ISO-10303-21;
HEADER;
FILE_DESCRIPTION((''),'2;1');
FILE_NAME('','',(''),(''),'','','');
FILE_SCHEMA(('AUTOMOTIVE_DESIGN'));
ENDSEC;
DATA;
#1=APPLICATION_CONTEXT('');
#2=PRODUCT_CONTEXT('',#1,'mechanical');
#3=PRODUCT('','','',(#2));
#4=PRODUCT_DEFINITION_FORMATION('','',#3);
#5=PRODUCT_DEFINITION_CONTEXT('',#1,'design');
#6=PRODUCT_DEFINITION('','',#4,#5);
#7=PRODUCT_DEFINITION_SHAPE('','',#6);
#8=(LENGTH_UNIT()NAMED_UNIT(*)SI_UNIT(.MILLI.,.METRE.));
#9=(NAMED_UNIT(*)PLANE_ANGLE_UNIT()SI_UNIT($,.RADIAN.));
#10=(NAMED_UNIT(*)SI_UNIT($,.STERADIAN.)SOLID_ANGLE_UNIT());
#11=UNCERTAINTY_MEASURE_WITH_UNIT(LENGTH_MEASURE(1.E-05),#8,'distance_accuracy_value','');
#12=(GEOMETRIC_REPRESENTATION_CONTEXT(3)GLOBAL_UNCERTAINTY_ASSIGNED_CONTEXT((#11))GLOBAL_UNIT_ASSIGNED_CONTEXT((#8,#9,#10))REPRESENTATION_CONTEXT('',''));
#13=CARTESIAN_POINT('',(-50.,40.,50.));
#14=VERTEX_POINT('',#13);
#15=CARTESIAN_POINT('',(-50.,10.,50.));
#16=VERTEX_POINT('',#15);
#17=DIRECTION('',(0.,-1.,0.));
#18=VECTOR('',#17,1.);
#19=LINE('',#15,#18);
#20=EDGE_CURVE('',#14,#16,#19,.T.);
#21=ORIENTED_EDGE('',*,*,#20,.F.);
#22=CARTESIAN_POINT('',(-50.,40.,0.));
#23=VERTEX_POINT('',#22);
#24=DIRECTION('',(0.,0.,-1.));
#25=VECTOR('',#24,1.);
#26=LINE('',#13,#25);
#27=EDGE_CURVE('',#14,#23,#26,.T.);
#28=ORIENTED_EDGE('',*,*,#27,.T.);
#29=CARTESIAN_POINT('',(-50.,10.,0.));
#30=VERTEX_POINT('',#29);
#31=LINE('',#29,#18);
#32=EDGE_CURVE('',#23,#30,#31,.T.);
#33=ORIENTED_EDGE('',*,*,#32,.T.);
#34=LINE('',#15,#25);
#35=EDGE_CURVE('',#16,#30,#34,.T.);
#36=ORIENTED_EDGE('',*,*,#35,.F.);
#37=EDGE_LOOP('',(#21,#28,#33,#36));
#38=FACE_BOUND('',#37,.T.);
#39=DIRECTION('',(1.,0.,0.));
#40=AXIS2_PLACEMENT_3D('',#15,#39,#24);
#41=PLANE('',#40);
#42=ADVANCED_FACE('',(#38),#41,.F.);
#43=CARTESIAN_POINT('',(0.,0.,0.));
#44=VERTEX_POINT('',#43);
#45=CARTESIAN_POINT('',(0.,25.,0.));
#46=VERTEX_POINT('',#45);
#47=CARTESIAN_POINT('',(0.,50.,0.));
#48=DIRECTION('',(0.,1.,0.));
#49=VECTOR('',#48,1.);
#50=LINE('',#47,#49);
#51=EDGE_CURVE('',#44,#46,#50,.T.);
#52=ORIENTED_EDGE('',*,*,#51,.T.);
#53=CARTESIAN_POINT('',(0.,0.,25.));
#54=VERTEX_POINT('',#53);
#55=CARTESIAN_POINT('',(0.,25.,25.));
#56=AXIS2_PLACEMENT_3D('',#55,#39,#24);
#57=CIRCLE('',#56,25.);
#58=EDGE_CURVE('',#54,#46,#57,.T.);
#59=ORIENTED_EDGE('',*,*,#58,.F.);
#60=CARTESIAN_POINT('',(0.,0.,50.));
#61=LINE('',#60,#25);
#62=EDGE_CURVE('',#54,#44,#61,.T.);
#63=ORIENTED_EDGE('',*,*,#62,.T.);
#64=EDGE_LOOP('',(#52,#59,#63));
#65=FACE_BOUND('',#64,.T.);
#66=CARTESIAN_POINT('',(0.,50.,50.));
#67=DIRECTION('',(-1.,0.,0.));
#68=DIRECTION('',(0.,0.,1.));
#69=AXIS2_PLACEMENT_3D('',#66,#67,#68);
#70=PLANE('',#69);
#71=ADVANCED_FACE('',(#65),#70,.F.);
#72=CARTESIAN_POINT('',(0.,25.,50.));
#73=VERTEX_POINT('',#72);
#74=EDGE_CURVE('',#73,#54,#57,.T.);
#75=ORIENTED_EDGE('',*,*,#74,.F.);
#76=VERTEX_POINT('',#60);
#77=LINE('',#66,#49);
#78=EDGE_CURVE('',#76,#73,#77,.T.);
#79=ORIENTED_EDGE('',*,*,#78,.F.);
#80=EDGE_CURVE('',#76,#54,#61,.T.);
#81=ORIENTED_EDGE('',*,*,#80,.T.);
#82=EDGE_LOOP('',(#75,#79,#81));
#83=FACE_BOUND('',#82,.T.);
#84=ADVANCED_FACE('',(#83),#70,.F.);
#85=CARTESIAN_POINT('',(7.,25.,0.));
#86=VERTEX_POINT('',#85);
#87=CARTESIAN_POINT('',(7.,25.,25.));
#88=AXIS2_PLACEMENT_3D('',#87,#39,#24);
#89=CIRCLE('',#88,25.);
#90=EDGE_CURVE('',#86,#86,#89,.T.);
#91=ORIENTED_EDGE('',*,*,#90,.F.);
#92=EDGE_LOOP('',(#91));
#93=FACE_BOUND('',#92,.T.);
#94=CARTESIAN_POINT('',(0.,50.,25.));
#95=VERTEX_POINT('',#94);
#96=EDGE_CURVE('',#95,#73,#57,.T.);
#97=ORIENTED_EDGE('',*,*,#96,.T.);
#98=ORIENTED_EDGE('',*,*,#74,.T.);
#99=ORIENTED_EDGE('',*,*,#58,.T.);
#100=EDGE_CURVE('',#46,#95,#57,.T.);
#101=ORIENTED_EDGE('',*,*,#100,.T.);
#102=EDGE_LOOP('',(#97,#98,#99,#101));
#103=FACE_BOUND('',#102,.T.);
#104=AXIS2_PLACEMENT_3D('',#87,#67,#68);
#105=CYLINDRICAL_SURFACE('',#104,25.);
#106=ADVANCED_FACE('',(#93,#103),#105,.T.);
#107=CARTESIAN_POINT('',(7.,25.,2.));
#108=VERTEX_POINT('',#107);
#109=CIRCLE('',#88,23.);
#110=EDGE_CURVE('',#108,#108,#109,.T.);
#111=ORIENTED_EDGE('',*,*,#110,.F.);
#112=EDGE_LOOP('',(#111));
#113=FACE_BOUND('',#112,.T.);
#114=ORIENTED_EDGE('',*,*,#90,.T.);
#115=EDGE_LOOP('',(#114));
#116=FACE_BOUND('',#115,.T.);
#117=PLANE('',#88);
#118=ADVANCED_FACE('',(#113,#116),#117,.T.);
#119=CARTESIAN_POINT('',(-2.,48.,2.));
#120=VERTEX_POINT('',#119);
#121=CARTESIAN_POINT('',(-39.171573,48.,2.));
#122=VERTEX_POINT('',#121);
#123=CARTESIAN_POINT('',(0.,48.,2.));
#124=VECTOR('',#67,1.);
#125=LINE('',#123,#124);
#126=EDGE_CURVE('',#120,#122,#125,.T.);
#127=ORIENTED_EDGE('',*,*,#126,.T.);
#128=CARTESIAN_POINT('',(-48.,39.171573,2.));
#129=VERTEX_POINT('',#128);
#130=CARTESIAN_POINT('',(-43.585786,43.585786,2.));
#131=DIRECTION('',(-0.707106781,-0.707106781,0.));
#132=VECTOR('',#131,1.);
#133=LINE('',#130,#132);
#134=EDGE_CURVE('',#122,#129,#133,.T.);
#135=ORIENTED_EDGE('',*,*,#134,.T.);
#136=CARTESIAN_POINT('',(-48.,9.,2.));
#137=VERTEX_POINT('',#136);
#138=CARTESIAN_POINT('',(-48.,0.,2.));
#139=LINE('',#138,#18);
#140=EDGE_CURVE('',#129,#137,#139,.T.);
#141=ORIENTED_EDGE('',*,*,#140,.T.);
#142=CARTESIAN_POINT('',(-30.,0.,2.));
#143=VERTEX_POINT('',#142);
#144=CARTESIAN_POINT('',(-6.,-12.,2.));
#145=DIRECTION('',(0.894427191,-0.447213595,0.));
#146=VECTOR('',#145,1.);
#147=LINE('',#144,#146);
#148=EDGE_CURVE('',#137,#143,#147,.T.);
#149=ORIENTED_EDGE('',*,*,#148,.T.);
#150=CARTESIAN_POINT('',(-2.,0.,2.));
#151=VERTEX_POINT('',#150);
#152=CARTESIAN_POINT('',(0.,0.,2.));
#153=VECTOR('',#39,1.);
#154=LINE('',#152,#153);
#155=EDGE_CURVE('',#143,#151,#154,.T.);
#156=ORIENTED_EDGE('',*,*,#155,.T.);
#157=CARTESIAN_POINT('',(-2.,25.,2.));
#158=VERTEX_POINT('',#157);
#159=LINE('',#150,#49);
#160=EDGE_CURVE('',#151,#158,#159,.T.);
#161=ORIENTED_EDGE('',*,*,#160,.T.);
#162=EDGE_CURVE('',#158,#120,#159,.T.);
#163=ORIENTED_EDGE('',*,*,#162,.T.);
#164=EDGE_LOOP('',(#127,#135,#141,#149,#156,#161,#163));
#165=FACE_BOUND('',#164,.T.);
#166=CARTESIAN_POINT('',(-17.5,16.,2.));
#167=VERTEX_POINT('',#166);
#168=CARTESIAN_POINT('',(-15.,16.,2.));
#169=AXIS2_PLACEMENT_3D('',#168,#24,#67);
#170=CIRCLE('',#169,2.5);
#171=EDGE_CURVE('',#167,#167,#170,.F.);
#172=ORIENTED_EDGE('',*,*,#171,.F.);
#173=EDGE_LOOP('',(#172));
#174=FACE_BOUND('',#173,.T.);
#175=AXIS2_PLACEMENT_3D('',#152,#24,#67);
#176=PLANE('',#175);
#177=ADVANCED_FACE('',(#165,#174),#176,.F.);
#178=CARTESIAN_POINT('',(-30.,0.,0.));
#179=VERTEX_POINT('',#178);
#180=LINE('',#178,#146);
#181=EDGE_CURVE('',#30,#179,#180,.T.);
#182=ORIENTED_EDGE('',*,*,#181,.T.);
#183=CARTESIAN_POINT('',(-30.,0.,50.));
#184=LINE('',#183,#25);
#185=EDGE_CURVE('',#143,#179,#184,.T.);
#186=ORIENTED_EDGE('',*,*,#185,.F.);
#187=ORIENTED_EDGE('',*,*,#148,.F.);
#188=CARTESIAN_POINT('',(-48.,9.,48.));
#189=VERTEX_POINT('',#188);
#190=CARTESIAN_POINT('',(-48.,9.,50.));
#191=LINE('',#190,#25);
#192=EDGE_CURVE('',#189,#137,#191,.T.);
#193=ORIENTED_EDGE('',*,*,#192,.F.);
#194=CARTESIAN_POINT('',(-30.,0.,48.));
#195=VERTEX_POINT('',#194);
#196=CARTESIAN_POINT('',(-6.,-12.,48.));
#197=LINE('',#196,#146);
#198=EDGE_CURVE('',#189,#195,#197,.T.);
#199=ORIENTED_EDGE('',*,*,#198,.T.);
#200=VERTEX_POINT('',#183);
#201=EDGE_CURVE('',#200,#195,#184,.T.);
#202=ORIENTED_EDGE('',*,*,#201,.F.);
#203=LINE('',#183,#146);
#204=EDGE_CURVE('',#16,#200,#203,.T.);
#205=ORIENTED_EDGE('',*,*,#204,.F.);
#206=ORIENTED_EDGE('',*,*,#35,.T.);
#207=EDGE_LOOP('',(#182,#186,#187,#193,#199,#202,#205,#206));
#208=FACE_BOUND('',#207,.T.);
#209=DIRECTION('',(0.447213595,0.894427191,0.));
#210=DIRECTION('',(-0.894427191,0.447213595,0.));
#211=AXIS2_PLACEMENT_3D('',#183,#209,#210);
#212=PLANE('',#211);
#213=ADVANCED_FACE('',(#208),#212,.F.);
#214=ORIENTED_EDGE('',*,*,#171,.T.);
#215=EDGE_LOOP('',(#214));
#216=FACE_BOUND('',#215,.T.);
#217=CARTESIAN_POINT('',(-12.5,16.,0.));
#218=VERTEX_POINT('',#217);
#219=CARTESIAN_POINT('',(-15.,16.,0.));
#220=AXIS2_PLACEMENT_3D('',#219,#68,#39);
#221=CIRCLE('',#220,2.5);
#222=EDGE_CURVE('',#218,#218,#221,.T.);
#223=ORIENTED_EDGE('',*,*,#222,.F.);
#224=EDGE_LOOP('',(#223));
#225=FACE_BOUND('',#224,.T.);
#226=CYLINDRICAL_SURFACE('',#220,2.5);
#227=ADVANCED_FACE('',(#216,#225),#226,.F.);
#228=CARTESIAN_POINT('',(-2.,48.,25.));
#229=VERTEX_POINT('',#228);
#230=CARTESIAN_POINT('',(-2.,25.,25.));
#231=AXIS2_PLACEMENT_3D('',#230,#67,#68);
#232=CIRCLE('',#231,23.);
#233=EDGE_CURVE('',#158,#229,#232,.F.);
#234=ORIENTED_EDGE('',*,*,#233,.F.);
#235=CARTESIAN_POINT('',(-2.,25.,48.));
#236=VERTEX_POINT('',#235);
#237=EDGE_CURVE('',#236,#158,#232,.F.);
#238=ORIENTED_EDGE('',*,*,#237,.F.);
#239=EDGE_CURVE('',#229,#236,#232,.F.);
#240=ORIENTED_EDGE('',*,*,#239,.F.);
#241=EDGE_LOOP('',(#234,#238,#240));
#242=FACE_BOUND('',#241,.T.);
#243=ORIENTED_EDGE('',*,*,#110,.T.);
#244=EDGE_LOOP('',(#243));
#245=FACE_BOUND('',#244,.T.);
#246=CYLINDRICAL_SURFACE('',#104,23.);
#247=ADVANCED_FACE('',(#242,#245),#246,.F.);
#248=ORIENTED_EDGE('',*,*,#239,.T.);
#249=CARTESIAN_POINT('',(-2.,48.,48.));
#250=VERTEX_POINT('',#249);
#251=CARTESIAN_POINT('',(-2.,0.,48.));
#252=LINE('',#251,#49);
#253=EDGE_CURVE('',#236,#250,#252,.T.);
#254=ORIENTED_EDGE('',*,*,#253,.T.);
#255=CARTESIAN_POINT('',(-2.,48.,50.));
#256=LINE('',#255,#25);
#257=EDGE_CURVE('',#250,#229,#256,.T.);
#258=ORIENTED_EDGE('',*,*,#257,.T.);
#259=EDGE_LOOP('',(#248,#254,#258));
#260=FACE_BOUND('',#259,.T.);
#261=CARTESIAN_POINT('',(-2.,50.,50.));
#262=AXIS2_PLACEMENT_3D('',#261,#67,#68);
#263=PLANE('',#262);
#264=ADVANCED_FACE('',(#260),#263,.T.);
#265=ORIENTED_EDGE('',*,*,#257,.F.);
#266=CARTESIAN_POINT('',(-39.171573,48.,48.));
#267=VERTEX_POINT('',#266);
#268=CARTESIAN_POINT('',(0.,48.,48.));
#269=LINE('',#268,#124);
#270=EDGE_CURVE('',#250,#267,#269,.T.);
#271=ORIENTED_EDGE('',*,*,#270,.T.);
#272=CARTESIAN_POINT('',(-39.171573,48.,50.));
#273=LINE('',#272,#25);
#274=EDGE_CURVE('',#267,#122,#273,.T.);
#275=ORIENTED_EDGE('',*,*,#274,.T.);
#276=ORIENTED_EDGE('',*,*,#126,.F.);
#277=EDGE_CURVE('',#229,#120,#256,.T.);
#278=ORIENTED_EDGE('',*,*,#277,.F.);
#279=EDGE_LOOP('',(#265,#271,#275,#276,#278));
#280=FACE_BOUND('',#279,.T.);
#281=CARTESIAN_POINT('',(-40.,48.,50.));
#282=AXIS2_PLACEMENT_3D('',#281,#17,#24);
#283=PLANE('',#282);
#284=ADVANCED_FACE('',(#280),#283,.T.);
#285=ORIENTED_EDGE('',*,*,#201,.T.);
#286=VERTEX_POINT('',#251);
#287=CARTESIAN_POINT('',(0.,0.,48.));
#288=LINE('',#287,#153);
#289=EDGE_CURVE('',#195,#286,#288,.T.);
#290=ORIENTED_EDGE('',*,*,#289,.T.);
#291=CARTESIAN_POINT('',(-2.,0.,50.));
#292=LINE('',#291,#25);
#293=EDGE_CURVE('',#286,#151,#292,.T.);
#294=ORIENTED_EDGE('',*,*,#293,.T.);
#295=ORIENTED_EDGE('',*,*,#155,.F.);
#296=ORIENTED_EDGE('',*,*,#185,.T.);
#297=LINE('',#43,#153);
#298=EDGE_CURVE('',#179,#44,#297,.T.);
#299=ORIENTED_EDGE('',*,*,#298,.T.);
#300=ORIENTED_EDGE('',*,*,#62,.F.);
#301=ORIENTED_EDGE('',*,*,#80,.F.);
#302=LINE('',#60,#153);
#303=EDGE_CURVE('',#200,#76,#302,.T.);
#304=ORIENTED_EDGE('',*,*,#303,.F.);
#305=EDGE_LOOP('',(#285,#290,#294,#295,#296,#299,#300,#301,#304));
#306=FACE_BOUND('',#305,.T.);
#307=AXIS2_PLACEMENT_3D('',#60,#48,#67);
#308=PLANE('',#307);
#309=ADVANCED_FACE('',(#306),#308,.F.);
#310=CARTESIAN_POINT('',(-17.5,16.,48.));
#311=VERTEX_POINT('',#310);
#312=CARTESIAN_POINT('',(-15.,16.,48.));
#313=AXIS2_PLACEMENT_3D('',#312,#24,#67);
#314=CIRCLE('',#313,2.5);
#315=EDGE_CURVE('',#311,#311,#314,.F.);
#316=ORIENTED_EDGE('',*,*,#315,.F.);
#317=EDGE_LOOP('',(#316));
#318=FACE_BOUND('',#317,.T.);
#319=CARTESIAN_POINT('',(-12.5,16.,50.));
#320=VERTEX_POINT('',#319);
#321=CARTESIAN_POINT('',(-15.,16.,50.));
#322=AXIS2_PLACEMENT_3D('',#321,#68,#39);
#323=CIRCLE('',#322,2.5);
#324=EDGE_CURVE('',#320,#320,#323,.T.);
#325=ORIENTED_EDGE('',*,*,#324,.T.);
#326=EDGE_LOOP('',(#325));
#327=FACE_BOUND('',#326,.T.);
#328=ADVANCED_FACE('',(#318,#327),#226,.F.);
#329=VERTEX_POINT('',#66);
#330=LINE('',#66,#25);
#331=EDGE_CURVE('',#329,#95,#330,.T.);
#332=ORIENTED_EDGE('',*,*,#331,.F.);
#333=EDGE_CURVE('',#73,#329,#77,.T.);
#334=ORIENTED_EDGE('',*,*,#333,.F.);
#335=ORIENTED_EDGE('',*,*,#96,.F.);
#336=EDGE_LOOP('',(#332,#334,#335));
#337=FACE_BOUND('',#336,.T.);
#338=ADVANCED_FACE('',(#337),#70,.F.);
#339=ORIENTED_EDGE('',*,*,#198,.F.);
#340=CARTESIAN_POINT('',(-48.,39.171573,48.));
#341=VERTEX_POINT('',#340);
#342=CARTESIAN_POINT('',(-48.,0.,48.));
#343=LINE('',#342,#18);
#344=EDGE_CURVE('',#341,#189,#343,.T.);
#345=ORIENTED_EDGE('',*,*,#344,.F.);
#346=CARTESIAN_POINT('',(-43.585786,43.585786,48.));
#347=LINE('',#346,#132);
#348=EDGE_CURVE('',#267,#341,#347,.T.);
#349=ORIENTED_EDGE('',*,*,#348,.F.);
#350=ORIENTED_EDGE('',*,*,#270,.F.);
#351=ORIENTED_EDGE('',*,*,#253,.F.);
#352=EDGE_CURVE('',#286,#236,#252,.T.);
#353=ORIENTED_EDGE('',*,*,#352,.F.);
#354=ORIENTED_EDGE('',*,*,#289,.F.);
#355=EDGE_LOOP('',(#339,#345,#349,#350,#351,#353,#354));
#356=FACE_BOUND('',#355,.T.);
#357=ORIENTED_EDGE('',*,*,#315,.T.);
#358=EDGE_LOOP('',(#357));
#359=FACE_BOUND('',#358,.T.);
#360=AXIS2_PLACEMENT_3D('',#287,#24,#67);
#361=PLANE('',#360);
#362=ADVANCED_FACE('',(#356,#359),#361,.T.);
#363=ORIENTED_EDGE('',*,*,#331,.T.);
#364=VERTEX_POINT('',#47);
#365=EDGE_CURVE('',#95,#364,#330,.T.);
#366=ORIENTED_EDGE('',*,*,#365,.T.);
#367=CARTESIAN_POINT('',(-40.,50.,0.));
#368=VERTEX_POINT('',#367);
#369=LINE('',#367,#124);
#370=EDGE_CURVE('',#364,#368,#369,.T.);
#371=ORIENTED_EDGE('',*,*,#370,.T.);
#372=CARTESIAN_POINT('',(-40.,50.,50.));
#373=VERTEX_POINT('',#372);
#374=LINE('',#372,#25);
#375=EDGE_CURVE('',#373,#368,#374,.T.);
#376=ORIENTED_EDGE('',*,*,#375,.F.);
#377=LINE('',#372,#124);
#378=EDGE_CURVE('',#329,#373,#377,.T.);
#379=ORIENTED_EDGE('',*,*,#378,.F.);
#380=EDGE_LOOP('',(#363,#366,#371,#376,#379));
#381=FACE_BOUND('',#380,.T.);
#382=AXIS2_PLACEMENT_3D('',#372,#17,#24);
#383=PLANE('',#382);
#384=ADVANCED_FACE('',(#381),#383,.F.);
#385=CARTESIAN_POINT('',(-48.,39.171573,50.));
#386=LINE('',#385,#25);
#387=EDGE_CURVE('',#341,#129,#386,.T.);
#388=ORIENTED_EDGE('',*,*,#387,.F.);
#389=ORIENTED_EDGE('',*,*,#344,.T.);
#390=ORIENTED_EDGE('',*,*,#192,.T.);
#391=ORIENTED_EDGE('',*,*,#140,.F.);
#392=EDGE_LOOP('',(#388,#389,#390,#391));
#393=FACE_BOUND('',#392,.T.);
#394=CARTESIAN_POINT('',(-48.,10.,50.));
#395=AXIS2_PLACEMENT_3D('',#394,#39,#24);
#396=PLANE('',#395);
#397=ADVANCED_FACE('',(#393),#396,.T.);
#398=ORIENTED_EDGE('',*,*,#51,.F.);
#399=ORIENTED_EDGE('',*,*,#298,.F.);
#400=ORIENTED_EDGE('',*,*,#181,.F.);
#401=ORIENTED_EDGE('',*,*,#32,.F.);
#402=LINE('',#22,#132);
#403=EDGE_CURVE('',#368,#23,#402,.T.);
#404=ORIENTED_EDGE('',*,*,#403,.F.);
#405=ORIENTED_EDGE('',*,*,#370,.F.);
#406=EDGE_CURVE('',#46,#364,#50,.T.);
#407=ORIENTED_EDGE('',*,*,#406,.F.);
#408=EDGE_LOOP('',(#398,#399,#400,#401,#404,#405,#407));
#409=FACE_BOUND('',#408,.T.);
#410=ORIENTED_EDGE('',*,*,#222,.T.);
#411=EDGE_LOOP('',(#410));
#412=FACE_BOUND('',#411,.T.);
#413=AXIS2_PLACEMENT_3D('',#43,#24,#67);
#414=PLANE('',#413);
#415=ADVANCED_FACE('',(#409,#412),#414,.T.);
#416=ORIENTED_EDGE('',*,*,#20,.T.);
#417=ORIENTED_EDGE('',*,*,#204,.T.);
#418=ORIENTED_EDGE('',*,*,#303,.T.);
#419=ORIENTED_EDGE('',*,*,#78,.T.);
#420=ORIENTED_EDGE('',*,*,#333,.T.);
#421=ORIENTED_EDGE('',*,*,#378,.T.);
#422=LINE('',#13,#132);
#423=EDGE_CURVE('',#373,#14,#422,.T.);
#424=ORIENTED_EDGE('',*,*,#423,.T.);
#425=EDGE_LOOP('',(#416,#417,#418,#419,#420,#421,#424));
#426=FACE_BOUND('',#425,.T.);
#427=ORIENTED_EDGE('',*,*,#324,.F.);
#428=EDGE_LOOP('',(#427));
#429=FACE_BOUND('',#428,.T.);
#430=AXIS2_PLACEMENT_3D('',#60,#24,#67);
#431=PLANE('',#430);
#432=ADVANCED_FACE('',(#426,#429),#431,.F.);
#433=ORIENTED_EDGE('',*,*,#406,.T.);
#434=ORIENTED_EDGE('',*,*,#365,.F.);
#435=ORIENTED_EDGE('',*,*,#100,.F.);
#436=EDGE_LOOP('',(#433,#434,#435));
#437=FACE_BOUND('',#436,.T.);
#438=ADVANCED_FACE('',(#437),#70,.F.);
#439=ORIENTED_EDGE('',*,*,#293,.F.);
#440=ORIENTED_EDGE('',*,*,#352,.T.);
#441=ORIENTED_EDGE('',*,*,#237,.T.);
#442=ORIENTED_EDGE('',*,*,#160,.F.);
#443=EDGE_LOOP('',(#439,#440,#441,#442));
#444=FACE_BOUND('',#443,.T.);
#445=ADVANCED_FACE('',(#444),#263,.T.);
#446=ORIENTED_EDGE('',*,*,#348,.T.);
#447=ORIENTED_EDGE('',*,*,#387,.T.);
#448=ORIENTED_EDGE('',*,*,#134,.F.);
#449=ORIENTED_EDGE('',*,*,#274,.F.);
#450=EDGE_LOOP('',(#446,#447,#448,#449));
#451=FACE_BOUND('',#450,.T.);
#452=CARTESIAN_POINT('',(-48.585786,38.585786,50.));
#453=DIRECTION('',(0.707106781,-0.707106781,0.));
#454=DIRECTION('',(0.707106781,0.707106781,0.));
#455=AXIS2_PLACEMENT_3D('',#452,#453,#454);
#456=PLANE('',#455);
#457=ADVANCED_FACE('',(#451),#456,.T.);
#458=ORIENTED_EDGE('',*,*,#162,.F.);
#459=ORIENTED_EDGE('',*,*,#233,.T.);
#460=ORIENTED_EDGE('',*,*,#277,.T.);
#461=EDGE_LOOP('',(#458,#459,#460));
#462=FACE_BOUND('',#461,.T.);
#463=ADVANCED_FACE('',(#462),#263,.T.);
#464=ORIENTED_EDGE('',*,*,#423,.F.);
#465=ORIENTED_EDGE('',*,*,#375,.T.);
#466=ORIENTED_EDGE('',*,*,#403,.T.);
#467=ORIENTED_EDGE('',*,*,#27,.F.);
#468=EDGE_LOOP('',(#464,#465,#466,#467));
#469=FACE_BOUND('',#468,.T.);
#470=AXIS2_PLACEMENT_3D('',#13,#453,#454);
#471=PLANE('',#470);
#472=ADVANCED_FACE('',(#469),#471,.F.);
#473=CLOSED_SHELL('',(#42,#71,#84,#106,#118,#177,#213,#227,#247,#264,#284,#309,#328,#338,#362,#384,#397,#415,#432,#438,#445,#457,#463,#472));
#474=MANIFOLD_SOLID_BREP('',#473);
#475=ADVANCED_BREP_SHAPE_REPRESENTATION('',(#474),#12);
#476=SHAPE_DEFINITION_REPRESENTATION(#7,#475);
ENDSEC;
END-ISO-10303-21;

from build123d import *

# Parameters (mm, degrees)
BOSS_EXTRU_1_DEPTH      = 50
ESQUISSE3_R             = 25
BOSS_EXTRU_2_DEPTH      = 7
ESQUISSE4_R             = 2.5
ENL_V_MAT_EXTRU_1_DEPTH = 87.602540378
COQUE1_START            = -39.171572875
COQUE1_OUTLINE_W        = 48
COQUE1_OUTLINE_H        = 46
COQUE1_DEPTH            = 37.171572875
COQUE1_START_2          = -2
COQUE1_2_OUTLINE_R      = 23
COQUE1_2_DEPTH          = 9
COQUE1_START_3          = -48
COQUE1_3_DEPTH          = 15.9452
COQUE1_START_4          = 2
COQUE1_4_DEPTH          = 46


with BuildPart() as part:
    # Esquisse1 → Boss.-Extru.1 (new body)
    with BuildSketch(Plane.XY):
        Polygon((0, 0), (-30, 0), (-50, 10), (-50, 40), (-40, 50), (0, 50), align=None)
    extrude(amount=BOSS_EXTRU_1_DEPTH)

    # Esquisse3 → Boss.-Extru.2 (add)
    with BuildSketch(Plane(origin=(0, 0, 0), x_dir=(0, 0, -1), z_dir=(1, 0, 0))):
        with Locations((-25, 25)):
            Circle(ESQUISSE3_R)
    extrude(amount=BOSS_EXTRU_2_DEPTH)

    # Esquisse4 → Enlèv. mat.-Extru.1 (cut, through all)
    with BuildSketch(Plane.XY.offset(50)):
        with Locations((-15, 16)):
            Circle(ESQUISSE4_R)
    extrude(amount=-ENL_V_MAT_EXTRU_1_DEPTH, mode=Mode.SUBTRACT)

    # Coque1: read off the stored shape, not the designer's step
    # Coque1 outline → Coque1 (cut)
    with BuildSketch(Plane.YZ.offset(COQUE1_START)):
        with Locations((24, 25)):
            Rectangle(COQUE1_OUTLINE_W, COQUE1_OUTLINE_H)
    extrude(amount=COQUE1_DEPTH, mode=Mode.SUBTRACT)

    # Coque1 2 outline → Coque1 2 (cut)
    with BuildSketch(Plane.YZ.offset(COQUE1_START_2)):
        with Locations((25, 25)):
            Circle(COQUE1_2_OUTLINE_R)
    extrude(amount=COQUE1_2_DEPTH, mode=Mode.SUBTRACT)

    # Coque1 3 outline → Coque1 3 (cut)
    with BuildSketch(Plane.YZ.offset(COQUE1_START_3)):
        with BuildLine():
            ThreePointArc((25, 2), (2, 25), (25, 48))
            Line((25, 48), (0, 48))
            Line((0, 48), (0, 2))
            Line((0, 2), (25, 2))
        make_face()
    extrude(amount=COQUE1_3_DEPTH, mode=Mode.SUBTRACT)

    # Coque1 4 outline → Coque1 4 (cut)
    with BuildSketch(Plane.XY.offset(COQUE1_START_4)):
        Polygon((-39.171572875, 48), (-48, 39.171572875), (-48, 9), (-39.171572875, 4.585786437), align=None)
    extrude(amount=COQUE1_4_DEPTH, mode=Mode.SUBTRACT)


solid = part.part
